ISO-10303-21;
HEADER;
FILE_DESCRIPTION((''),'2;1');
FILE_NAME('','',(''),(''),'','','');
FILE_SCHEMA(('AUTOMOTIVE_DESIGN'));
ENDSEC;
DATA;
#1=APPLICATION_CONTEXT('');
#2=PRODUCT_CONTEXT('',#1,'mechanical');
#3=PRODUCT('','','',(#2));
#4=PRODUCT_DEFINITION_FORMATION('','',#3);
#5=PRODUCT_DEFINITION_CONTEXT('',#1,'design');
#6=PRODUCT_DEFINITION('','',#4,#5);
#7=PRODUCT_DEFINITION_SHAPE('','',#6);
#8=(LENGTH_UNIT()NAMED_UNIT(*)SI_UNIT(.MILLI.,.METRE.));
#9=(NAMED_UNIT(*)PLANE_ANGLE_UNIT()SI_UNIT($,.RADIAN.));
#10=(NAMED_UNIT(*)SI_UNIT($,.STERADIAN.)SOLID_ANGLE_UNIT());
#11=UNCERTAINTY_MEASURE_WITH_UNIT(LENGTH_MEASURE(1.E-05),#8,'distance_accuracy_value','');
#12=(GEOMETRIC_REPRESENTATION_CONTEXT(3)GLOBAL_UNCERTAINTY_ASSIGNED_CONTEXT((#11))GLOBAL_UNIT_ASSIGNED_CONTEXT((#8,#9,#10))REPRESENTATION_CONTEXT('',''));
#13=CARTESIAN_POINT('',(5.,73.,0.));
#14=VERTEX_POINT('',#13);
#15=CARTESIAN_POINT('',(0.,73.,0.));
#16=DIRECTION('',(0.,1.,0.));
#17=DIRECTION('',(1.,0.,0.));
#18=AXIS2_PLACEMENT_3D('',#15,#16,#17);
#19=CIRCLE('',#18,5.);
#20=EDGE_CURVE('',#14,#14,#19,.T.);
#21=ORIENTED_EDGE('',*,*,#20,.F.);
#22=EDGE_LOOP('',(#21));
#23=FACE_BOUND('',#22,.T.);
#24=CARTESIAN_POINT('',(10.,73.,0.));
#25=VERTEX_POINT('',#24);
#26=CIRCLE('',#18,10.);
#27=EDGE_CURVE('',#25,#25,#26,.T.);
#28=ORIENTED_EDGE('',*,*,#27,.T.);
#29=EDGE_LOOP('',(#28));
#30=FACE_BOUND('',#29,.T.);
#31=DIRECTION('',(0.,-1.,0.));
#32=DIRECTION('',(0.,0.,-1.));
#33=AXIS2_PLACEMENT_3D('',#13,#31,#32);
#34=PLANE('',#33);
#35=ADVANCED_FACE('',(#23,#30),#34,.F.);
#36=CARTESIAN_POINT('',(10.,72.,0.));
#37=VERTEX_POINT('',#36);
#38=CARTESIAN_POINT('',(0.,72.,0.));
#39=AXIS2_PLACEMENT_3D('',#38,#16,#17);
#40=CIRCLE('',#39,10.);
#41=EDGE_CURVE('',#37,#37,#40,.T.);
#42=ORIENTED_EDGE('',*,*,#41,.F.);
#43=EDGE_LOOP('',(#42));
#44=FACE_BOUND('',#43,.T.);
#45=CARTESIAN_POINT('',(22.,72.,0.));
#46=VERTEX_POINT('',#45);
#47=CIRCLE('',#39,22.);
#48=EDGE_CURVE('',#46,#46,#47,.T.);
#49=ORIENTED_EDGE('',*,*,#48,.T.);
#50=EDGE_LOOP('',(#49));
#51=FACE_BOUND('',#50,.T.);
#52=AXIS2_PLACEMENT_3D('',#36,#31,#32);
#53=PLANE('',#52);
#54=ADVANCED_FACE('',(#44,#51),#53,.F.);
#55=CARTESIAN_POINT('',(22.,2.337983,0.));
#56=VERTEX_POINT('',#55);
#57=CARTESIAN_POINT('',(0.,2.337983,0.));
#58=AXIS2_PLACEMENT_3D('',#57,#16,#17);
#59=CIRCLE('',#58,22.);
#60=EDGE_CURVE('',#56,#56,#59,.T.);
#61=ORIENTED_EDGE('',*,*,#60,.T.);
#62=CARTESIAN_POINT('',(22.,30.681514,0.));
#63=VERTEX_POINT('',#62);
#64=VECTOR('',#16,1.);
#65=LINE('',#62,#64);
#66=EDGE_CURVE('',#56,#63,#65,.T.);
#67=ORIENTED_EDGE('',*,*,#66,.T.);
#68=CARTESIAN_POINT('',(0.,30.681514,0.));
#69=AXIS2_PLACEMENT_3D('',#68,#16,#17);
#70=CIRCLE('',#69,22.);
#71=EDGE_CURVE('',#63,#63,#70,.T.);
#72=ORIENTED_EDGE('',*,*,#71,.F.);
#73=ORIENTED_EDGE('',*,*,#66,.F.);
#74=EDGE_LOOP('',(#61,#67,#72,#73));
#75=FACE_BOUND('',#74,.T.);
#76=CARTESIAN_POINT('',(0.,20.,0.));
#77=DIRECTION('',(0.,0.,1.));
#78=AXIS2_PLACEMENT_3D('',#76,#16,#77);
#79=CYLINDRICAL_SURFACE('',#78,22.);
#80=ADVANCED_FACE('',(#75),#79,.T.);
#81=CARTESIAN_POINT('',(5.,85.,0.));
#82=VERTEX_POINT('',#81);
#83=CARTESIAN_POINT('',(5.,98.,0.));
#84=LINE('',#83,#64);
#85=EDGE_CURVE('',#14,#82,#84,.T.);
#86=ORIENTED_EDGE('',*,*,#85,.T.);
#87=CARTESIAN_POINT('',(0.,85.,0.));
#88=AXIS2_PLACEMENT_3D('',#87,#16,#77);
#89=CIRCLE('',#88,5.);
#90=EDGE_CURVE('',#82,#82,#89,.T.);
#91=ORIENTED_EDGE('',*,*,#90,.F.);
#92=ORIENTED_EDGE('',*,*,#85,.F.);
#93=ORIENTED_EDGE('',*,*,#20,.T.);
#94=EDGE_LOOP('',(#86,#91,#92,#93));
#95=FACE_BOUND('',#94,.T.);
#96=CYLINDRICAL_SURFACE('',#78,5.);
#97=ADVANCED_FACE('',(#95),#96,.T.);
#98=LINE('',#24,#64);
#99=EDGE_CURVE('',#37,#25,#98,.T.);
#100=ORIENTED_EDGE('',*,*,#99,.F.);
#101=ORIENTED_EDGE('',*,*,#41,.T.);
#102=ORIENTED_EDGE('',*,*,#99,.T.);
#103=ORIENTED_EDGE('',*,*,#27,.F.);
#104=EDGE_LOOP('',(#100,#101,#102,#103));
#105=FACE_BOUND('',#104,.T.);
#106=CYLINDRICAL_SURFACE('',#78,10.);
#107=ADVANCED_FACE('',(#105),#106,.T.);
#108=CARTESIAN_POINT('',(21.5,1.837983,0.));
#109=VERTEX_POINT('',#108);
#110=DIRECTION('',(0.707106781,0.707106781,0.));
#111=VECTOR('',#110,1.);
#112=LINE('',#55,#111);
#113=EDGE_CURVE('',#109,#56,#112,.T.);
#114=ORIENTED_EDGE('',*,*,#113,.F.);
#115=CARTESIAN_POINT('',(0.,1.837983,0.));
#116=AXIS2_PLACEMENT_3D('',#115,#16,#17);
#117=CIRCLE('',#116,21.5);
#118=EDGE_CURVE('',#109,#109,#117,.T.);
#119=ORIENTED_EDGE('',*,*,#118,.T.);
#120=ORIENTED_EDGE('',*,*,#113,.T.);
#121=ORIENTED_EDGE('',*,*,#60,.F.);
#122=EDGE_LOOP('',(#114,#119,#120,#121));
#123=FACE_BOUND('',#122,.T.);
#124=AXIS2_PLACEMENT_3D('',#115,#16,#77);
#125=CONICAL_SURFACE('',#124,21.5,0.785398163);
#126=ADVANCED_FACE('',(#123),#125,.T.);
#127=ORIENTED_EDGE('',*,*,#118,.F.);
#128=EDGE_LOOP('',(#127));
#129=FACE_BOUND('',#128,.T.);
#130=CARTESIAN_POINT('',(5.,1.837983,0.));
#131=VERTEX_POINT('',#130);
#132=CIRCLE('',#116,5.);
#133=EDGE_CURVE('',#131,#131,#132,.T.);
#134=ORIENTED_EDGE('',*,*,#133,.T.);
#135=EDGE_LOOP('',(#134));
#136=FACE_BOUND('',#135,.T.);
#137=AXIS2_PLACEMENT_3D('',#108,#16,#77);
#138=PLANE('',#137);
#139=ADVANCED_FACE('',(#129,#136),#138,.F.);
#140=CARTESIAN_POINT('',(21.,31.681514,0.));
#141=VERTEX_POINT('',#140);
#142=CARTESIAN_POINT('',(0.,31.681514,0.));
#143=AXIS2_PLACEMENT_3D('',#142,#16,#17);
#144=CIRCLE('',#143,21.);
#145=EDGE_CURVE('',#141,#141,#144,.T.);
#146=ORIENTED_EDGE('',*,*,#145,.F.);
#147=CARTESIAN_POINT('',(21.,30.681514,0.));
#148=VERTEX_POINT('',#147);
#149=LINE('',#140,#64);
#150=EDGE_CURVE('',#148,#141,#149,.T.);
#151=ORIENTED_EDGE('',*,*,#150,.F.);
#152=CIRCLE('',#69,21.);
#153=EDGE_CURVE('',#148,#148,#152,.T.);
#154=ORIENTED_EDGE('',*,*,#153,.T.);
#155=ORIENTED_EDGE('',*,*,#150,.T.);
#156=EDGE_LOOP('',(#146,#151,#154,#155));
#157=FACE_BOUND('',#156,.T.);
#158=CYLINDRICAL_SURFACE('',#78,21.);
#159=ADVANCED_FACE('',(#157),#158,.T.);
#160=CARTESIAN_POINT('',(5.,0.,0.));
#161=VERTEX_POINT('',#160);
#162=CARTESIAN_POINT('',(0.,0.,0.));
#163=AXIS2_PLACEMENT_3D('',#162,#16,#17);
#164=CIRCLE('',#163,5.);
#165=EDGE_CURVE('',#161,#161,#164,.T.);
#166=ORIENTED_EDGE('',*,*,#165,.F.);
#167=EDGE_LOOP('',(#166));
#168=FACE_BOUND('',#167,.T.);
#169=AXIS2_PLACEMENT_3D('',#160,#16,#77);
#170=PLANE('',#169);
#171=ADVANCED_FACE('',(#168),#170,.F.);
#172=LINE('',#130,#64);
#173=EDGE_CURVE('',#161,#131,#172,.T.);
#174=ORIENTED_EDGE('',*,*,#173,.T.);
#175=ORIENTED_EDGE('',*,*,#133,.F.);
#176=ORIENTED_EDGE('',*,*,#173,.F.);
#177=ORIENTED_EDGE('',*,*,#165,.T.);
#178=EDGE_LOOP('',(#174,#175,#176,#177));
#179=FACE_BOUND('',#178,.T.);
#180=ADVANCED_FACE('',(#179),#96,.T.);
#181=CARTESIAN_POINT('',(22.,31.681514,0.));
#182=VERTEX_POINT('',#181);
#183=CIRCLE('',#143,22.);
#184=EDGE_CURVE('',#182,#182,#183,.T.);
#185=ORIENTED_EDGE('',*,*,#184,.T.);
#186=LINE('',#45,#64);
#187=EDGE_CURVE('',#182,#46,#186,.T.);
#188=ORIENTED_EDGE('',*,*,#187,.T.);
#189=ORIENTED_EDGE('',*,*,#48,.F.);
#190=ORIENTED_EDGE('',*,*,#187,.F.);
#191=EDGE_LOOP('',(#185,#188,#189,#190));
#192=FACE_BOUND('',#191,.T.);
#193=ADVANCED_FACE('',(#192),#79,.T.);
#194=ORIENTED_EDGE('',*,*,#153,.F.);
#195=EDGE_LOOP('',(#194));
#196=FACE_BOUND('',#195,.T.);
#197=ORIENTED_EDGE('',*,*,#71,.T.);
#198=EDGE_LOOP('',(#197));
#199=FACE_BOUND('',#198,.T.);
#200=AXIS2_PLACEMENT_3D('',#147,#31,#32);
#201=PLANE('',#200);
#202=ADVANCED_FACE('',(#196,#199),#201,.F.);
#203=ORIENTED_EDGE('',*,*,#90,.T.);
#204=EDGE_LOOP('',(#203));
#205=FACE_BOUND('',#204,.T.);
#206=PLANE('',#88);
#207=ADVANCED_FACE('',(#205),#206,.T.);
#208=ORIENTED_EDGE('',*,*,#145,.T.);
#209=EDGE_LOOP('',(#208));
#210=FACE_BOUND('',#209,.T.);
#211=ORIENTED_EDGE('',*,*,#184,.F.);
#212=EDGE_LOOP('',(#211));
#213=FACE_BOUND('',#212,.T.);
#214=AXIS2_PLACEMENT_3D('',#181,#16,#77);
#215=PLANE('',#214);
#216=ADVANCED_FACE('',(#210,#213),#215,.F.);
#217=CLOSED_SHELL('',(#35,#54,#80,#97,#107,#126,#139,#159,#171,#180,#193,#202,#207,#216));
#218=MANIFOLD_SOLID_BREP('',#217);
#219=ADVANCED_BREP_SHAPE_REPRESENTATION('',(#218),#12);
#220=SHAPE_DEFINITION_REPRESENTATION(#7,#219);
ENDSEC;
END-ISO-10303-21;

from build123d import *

# Parameters (mm, degrees)
CUT_EXTRUDE_1_DEPTH      = 23
CUT_EXTRUDE_1_DEPTH_BACK = 3
SKETCH_8_R               = 1.5
THREAD_2_PITCH           = 0.3175
SKETCH_9_R               = 5
CUT_EXTRUDE_2_DEPTH      = 15


with BuildPart() as part:
    # 扫描1: sweep along a path in 草图7
    with BuildLine(Plane(origin=(0, 20, 0), x_dir=(1, 0, 0), z_dir=(0, 1, 0))) as sweep_1_path:
        CenterArc((0, 0), 8.222167991, 0, 360)
    # 草图6 → 扫描1 (sweep)
    with BuildSketch(Plane.XY):
        Polygon((0, 0), (0, 98), (5, 98), (5, 73), (10, 73), (10, 72), (22, 72), (22, 31.681513685), (21, 31.681513685), (21, 30.681513685), (22, 30.681513685), (22, 2.337983279), (21.5, 1.837983279), (5, 1.837983279), (5, 0), align=None)
    sweep(path=sweep_1_path.line)

    # 草图8 → 切除-拉伸1 (cut, two sides: drawn at the far end of the back side and taken through both)
    with BuildSketch(Plane.XY.offset(-CUT_EXTRUDE_1_DEPTH_BACK)):
        with Locations(Location((0, 90.222635434, 0), (0, 0, 270))):
            Circle(SKETCH_8_R)
    extrude(amount=CUT_EXTRUDE_1_DEPTH + CUT_EXTRUDE_1_DEPTH_BACK, mode=Mode.SUBTRACT)

    # 螺纹线2: the profile of 螺纹线轮廓3 profile screwed along a right-hand helix of 23.622047 turns, 6 arcs to a turn; built about Z, then put on its axis
    thread_2_z = Axis((0, 0, 0), (0, 0, 1))
    thread_2_corners = [(1.5003, 0, -0.000173205), (1.5003, 0, 0.277985704), (1.328148085, 0, 0.17859375), (1.328148085, 0, 0.09921875)]
    with BuildLine(mode=Mode.PRIVATE) as thread_2_profile:
        Line(thread_2_corners[0], thread_2_corners[1])
        Line(thread_2_corners[1], thread_2_corners[2])
        Line(thread_2_corners[2], thread_2_corners[3])
        Line(thread_2_corners[3], thread_2_corners[0])
    thread_2_cap = Face(thread_2_profile.wire())
    thread_2_turn_angles = [0, 30, 60, 90, 120, 150, 180, 210, 240, 270, 300, 330, 360]
    thread_2_turn_weights = [1, 0.8660254037844387, 1, 0.8660254037844387, 1, 0.8660254037844387, 1, 0.8660254037844387, 1, 0.8660254037844387, 1, 0.8660254037844387, 1]
    thread_2_turn_rails = [Edge.make_bspline([Vector(p[0], p[1], 0).rotate(thread_2_z, thread_2_turn_angles[k]) / thread_2_turn_weights[k] + Vector(0, 0, p[2] + THREAD_2_PITCH * thread_2_turn_angles[k] / 360) for k in range(13)], [0, 0, 0, 1, 1, 2, 2, 3, 3, 4, 4, 5, 5, 6, 6, 6], 2, thread_2_turn_weights) for p in thread_2_corners]
    thread_2_turn_sides = [Face.make_surface_from_curves(thread_2_turn_rails[p[0]], thread_2_turn_rails[p[1]]) for p in [(0, 1), (1, 2), (2, 3), (3, 0)]]
    thread_2_last_angles = [8280, 8310, 8340, 8370, 8400, 8430, 8460, 8481.968503937, 8503.937007874]
    thread_2_last_weights = [1, 0.8660254037844387, 1, 0.8660254037844387, 1, 0.8660254037844387, 1, 0.9273896394584102, 1]
    thread_2_last_rails = [Edge.make_bspline([Vector(p[0], p[1], 0).rotate(thread_2_z, thread_2_last_angles[k]) / thread_2_last_weights[k] + Vector(0, 0, p[2] + THREAD_2_PITCH * thread_2_last_angles[k] / 360) for k in range(9)], [0, 0, 0, 1, 1, 2, 2, 3, 3, 4, 4, 4], 2, thread_2_last_weights) for p in thread_2_corners]
    thread_2_last_sides = [Face.make_surface_from_curves(thread_2_last_rails[p[0]], thread_2_last_rails[p[1]]) for p in [(0, 1), (1, 2), (2, 3), (3, 0)]]
    thread_2 = Plane(origin=(0, 90.222635434, -3), x_dir=(1, 0, 0), z_dir=(0, 0, 1)) * Solid(Shell([*[p.moved(Location((0, 0, THREAD_2_PITCH * i))) for i in range(23) for p in thread_2_turn_sides], *thread_2_last_sides, thread_2_cap, thread_2_cap.rotate(thread_2_z, 8503.937007874).moved(Location((0, 0, THREAD_2_PITCH * 8503.937007874 / 360)))]))
    add(thread_2)

    # 草图9 → 切除-拉伸2 (cut)
    with BuildSketch(Plane(origin=(0, 100, 0), x_dir=(1, 0, 0), z_dir=(0, 1, 0))):
        Circle(SKETCH_9_R)
    extrude(amount=-CUT_EXTRUDE_2_DEPTH, mode=Mode.SUBTRACT)


solid = part.part
